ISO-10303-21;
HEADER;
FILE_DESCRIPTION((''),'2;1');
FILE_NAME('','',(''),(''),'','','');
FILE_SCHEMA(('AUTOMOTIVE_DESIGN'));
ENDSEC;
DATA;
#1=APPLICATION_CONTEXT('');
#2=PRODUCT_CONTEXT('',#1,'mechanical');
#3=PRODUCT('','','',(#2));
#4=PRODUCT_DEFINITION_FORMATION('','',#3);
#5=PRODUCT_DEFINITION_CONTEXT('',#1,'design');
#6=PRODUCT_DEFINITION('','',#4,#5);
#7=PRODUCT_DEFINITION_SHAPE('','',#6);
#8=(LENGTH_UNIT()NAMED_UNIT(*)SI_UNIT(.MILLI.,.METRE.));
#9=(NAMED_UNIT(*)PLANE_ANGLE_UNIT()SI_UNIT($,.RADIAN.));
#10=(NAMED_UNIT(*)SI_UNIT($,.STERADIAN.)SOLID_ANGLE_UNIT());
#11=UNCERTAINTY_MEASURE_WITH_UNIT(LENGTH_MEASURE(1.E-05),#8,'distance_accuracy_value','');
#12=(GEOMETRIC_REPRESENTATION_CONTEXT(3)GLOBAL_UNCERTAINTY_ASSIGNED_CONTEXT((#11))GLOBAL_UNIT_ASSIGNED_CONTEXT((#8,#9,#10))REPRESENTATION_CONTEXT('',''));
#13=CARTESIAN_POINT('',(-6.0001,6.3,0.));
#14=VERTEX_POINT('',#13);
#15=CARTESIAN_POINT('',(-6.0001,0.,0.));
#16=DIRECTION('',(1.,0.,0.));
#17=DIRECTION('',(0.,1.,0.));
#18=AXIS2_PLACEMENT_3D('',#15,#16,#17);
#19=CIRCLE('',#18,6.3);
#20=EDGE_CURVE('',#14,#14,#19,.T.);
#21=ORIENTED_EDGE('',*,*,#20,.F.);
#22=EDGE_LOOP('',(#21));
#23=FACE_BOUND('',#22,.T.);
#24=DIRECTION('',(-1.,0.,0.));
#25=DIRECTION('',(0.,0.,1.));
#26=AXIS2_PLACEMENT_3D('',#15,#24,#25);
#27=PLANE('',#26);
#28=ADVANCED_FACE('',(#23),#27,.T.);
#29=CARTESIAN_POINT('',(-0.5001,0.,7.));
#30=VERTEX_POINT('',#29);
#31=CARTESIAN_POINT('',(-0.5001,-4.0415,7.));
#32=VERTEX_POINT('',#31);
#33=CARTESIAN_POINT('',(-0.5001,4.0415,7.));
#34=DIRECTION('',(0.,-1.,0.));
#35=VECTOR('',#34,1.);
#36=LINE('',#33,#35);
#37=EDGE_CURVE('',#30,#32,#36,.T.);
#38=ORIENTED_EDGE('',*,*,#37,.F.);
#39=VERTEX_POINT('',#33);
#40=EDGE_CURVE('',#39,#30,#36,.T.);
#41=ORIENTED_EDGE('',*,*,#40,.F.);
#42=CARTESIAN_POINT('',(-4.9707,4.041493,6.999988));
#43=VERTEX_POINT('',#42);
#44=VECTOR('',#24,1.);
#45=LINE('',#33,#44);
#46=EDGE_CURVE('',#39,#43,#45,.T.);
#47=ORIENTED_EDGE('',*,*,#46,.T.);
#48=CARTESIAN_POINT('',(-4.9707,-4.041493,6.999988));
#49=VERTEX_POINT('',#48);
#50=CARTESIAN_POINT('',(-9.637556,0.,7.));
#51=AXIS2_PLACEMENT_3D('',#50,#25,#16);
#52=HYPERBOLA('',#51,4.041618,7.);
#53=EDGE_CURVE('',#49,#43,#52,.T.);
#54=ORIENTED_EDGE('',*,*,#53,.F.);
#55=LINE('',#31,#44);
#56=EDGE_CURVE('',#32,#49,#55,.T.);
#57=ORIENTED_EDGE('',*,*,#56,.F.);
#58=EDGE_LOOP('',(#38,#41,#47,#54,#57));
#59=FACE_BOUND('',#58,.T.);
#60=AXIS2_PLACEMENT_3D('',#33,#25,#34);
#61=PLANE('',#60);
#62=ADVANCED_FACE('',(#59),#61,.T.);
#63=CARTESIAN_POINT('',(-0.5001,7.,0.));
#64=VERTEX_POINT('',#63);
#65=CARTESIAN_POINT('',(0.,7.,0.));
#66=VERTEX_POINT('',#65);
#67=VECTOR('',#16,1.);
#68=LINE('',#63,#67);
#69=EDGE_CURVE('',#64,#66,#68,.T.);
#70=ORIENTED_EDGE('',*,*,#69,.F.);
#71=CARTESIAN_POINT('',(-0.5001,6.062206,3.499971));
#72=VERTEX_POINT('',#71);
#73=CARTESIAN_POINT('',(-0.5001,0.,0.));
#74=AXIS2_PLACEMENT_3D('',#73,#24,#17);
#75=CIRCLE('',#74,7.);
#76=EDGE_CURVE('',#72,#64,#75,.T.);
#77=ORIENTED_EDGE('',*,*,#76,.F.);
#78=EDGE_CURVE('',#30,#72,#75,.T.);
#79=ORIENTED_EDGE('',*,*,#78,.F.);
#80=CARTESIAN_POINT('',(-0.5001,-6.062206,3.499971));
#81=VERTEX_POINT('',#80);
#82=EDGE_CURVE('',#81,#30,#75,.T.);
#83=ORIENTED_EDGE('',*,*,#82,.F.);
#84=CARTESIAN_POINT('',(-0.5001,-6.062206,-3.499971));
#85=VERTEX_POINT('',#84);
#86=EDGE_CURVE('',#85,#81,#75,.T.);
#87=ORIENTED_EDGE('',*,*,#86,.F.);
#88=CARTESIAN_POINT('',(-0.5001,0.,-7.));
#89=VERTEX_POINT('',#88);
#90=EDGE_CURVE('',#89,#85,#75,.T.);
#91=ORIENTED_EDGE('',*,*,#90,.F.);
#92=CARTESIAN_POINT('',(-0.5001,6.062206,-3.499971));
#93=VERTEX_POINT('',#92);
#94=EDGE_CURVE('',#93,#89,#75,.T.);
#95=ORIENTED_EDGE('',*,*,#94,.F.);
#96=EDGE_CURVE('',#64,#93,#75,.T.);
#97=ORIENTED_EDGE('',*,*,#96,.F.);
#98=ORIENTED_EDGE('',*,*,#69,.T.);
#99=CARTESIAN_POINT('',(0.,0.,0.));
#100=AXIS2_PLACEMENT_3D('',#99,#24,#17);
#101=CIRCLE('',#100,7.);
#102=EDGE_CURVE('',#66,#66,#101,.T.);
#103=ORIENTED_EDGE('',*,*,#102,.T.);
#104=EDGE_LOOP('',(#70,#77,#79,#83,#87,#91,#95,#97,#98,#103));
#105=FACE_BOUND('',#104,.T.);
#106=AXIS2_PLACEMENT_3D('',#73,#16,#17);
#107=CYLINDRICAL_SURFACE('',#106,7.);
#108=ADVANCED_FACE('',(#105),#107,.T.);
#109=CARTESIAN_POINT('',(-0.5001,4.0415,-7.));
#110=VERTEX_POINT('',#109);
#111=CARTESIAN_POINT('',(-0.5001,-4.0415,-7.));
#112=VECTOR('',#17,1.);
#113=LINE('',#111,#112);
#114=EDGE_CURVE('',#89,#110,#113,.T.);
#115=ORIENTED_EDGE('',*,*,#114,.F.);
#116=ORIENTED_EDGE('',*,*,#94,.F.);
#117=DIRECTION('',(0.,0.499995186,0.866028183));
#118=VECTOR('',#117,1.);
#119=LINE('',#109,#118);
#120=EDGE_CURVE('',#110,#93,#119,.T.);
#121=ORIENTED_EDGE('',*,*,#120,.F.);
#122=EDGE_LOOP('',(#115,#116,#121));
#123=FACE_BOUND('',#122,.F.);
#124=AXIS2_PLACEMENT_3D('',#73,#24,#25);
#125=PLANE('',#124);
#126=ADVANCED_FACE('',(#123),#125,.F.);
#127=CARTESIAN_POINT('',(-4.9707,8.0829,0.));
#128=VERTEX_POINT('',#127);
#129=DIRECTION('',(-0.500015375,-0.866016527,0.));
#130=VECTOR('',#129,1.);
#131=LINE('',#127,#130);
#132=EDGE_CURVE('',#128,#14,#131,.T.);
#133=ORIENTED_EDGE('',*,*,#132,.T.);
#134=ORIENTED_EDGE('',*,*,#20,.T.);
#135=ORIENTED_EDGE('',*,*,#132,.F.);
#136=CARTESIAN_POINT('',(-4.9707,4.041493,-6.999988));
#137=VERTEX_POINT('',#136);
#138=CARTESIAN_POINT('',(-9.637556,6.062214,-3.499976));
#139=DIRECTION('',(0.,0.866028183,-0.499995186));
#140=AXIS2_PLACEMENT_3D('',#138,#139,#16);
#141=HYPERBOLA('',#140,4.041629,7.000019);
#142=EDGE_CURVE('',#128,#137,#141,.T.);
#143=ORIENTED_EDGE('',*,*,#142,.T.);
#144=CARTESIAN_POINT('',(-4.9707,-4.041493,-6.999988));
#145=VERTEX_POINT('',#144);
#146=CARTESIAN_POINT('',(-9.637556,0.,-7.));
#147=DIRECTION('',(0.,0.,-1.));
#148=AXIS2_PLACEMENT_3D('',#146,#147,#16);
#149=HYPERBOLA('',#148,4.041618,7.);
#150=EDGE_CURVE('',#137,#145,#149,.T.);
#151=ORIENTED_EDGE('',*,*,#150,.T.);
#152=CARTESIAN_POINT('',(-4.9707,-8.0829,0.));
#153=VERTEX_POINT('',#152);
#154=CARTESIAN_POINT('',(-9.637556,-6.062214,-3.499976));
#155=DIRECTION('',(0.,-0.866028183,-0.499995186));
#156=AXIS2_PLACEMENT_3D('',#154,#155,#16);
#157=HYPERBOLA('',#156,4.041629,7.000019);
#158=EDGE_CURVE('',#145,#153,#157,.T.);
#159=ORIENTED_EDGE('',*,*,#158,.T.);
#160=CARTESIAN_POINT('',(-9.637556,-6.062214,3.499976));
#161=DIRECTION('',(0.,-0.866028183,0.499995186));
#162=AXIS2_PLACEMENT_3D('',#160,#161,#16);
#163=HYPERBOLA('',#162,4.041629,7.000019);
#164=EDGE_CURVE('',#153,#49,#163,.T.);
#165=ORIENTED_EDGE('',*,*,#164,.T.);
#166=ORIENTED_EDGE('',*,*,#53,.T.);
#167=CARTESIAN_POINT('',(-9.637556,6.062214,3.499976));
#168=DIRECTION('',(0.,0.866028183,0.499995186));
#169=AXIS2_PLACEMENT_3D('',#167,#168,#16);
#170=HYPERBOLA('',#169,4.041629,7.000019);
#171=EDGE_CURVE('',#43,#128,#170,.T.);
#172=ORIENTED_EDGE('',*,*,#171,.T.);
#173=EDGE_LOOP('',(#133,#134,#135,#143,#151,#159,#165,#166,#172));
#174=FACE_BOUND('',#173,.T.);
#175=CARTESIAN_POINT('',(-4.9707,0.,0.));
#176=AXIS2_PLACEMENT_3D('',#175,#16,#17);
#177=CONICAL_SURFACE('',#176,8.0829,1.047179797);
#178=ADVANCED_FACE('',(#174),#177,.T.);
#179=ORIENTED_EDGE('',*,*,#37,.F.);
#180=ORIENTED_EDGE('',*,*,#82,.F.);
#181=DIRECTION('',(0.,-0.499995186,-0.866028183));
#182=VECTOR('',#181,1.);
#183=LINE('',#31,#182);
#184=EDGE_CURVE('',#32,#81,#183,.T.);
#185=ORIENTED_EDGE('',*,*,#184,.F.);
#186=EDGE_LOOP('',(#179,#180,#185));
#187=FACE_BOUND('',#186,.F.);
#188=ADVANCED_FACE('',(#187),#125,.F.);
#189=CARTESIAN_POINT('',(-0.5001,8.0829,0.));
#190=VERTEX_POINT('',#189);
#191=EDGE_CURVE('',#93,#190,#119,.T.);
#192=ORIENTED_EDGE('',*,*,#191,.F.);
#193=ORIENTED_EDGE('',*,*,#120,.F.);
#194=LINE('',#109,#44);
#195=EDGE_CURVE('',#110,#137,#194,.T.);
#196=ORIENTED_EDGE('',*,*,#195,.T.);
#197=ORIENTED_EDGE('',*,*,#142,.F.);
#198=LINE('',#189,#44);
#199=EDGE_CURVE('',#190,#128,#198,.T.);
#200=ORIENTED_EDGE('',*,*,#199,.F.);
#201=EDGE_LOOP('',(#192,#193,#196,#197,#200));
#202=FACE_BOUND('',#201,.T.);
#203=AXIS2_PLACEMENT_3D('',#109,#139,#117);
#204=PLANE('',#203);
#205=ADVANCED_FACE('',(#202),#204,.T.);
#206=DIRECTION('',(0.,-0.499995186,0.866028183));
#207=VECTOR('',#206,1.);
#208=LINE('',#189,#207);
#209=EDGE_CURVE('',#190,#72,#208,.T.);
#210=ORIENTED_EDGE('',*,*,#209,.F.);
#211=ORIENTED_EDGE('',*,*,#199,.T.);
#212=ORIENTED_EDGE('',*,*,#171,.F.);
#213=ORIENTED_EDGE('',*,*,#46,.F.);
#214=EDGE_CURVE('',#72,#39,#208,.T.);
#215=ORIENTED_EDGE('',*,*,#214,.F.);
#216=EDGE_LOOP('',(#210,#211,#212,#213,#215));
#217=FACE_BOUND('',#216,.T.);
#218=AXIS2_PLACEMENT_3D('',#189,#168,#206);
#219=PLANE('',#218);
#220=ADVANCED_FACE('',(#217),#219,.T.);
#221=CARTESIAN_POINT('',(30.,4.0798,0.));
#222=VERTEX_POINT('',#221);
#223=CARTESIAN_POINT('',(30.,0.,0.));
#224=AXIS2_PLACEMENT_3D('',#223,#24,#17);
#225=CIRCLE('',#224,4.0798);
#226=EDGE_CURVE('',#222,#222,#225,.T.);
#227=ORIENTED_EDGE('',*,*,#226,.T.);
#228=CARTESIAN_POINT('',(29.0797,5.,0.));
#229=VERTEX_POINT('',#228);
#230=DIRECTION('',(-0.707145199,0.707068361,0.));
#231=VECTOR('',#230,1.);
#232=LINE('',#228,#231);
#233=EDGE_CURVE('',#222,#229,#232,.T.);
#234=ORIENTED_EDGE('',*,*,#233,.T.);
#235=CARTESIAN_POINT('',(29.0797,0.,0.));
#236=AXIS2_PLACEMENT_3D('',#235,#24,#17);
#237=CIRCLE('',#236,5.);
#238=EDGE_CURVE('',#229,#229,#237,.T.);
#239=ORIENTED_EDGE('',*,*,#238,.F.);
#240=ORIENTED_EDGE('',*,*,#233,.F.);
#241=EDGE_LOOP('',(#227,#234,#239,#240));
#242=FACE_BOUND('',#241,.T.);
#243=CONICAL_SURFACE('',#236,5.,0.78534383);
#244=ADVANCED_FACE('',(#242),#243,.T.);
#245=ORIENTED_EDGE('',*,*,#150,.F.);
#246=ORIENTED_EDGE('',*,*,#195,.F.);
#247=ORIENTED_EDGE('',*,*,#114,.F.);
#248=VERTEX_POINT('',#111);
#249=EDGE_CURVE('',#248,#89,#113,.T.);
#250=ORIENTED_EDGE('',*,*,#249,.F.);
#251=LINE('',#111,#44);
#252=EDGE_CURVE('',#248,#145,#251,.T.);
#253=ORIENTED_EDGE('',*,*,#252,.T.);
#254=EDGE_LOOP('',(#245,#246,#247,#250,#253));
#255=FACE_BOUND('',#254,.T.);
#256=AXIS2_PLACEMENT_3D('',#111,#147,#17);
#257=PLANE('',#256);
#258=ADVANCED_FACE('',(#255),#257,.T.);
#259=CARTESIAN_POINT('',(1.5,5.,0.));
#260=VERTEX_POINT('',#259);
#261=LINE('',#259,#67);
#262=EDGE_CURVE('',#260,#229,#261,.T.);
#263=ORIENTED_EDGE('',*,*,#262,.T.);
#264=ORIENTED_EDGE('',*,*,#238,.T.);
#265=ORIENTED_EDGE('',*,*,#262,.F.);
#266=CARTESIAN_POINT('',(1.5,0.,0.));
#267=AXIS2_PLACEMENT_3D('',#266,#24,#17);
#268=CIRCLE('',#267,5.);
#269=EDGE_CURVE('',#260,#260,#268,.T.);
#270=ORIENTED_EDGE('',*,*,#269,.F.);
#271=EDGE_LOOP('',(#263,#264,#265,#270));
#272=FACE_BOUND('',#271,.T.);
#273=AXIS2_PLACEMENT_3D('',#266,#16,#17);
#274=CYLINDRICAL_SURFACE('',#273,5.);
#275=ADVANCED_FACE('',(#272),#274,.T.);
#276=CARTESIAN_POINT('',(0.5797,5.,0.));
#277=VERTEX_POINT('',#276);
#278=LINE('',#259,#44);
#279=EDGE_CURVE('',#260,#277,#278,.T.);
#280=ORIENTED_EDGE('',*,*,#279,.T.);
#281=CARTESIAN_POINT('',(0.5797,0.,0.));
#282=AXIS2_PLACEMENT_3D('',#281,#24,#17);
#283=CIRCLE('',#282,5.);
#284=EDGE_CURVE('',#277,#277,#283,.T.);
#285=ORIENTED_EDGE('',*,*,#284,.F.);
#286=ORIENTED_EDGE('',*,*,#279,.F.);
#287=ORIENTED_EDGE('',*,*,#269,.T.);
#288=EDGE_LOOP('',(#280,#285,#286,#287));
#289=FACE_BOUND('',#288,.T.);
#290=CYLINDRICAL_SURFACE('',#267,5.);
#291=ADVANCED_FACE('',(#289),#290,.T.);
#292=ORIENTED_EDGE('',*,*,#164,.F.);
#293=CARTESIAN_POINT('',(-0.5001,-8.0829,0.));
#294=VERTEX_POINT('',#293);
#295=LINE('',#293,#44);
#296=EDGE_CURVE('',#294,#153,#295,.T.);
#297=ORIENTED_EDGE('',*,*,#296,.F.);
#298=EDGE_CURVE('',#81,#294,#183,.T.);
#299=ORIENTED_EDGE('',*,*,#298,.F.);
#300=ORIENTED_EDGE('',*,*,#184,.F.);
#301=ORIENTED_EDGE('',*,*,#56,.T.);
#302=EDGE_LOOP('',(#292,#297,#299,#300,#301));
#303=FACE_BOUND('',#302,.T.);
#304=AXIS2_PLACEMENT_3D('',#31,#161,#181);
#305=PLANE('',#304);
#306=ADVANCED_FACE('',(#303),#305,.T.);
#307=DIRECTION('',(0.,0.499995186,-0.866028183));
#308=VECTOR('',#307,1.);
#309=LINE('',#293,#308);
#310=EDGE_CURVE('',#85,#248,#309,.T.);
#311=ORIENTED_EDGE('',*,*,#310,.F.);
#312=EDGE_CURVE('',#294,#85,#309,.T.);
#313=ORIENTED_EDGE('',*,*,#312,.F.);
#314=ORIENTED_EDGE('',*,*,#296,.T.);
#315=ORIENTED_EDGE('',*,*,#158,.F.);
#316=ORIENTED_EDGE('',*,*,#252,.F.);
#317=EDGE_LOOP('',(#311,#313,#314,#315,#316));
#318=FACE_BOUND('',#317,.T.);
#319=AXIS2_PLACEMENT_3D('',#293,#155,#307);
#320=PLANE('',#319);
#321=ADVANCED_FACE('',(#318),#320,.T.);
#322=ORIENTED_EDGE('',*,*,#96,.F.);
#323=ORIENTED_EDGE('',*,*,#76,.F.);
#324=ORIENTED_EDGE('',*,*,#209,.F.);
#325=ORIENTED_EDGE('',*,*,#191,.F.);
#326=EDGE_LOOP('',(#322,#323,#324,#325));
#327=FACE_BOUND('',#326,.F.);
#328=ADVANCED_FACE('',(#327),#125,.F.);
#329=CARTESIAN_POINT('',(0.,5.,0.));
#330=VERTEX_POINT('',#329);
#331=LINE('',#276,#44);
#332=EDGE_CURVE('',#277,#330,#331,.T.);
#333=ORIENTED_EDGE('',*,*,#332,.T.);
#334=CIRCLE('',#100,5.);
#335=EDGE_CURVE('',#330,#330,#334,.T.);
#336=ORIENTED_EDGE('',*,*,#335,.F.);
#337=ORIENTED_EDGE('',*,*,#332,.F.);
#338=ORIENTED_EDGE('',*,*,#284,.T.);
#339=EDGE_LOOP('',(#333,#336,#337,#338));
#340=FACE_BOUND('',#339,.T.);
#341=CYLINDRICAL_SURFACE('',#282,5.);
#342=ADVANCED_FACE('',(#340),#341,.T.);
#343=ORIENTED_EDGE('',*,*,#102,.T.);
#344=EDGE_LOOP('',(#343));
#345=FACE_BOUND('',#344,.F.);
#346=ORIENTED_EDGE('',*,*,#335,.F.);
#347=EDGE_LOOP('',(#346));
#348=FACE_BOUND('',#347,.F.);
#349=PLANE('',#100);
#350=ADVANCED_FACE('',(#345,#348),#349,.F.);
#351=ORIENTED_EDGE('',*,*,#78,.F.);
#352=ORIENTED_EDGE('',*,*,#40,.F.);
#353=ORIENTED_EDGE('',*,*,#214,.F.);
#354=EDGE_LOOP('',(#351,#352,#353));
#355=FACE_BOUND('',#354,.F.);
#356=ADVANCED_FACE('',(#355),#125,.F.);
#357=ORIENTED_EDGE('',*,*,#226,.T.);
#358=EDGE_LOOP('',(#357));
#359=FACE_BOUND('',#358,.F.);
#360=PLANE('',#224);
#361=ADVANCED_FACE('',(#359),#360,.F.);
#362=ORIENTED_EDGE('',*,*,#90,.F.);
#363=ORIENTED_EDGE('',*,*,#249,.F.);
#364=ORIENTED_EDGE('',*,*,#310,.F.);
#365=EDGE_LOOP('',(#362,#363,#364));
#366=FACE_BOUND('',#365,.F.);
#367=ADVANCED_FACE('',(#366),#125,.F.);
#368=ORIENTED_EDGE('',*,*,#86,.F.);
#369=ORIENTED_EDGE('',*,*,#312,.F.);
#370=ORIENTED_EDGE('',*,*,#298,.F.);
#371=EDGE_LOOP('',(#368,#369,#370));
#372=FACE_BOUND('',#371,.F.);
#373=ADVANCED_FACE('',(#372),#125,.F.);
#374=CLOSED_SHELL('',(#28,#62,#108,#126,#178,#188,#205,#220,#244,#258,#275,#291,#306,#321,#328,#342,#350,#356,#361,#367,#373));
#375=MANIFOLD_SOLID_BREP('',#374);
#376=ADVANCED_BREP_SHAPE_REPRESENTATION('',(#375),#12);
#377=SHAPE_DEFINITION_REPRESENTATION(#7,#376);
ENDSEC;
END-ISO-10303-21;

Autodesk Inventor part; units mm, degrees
ref_plane "YZ Plane" through (0, 0, 0) normal (1, 0, 0) x (0, 1, 0)
ref_plane "XZ Plane" through (0, 0, 0) normal (0, 1, 0) x (-1, 0, 0)
sketch "Эскиз1" plane through (0, 0, 0) normal (0, 0, 1) x (1, 0, 0)
  line L0 (0, 7) -> (0, 5)
  line L1 (1.5, 5) -> (30, 5)
  line L2 (30, 5) -> (30, 0)
  line L3 (30, 0) -> (-0.5001, 0)
  line L4 (-6.6001, 0) -> (36.1, 0) projected
  line L5 (-0.5001, 0) -> (-0.5001, 7)
  line L6 (-0.5001, 7) -> (0, 7)
  line L7 (1.5, 5) -> (0.5797, 5)
  line L8 (0.5797, 5) -> (0, 5)
  line L9 (0, -1.4) -> (0, 8.4) projected
  dimension "d0" = 30
  dimension "d1" = 28.5
  dimension "d2" = 10
  dimension "d9" = 0.5001
  dimension "d10" = 14
  dimension "d13" = 0.9203
  dimension "d14" = 10
revolve "Базовый элемент" add sketch "Эскиз1" angle 360 about axis through (30, 0, 0) along (-1, 0, 0)
sketch "Эскиз2" plane through (-0.5001, 0, 0) normal (-1, 0, 0) x (0, 0, 1)
  line L0 (0, 8.0829) -> (7, 4.0415)
  line L1 (7, 4.0415) -> (7, -4.0415)
  line L2 (7, -4.0415) -> (0, -8.0829)
  line L3 (0, -8.0829) -> (-7, -4.0415)
  line L4 (-7, -4.0415) -> (-7, 4.0415)
  line L5 (-7, 4.0415) -> (0, 8.0829)
  point P0 (0, 0)
  point P1 (0, 0)
  dimension "d11" = 14
extrude "С головкой" add sketch "Эскиз2" along normal blind 5.5
sketch "Эскиз4" plane through (0, 0, 0) normal (0, 0, 1) x (1, 0, 0)
  line L0 (-6.0001, 6.3) -> (-6.0001, 8.0829)
  line L1 (-6.0001, 8.0829) -> (-4.9707, 8.0829)
  line L2 (-4.9707, 8.0829) -> (-6.0001, 6.3)
  line L3 (-7.1001, 0) -> (0.5999, 0) projected
  line L4 (-0.5001, 8.0829) -> (-6.0001, 8.0829) projected
  line L5 (-6.0001, 4.0415) -> (-6.0001, 8.0829) projected
  dimension "d5" = 30
  dimension "d19" = 12.6
revolve "Фаска1" cut sketch "Эскиз4" angle 360 about axis through (-10, 0, 0) along (1, 0, 0)
thread "Резьба" size "M10x1.5" class "6g" standard "ISO Metric profile" length 28.5
chamfer "Фаска2" distance 0.9202 distance2 0.9203 1 edges at (30, -5, 0) measured on face at (30, -0.2009, 0.1054)
ref_plane "Work Plane1" through (1.525, 0, 0) normal (0, 0, 1) x (1, 0, 0)
equation "\"d0\" = NLG"
equation "\"d1\" = GEL"
equation "\"d2\" = GD"
equation "\"d10\" = SD2"
equation "\"d14\" = BDM"
equation "\"d11\" = SW"
equation "\"d3\" = KOH - SD"
equation "\"d5\" = ANG1"
equation "\"d19\" = SW0"
equation "\"d15\" = GEL"
equation "\"d6\" = -0.5 * SPD + 0.5 * GD"
equation "\"NLG\" = 30"
equation "\"GD\" = NND"
equation "\"BDM\" = NND"
equation "\"KOH\" = 6"
equation "\"GEL\" = 28.5"
equation "\"SW\" = 14"
equation "\"SW0\" = 12.6"
equation "\"SPD\" = NND - 1.2269 * PTC"
equation "\"SD2\" = SW"
equation "\"SD\" = 0.5"
equation "\"ANG1\" = 30deg"
equation "\"GAL\" = 0.61345 * PTC"
equation "\"GUL\" = 0.61345 * PTC"
equation "\"RR\" = 0.1"
equation "\"GD1\" = THREADDIA - 1.2269 * PTC"
equation "\"TOA\" = 30deg"
equation "\"PTC\" = 1.5"
equation "\"E0\" = 1.155 * SW"
equation "\"NND\" = 10"
equation "\"THREADDIA\" = 10"
properties part number "Болт M10-6gx30 ГОСТ 7808-70" material "Сталь, мягкая"
